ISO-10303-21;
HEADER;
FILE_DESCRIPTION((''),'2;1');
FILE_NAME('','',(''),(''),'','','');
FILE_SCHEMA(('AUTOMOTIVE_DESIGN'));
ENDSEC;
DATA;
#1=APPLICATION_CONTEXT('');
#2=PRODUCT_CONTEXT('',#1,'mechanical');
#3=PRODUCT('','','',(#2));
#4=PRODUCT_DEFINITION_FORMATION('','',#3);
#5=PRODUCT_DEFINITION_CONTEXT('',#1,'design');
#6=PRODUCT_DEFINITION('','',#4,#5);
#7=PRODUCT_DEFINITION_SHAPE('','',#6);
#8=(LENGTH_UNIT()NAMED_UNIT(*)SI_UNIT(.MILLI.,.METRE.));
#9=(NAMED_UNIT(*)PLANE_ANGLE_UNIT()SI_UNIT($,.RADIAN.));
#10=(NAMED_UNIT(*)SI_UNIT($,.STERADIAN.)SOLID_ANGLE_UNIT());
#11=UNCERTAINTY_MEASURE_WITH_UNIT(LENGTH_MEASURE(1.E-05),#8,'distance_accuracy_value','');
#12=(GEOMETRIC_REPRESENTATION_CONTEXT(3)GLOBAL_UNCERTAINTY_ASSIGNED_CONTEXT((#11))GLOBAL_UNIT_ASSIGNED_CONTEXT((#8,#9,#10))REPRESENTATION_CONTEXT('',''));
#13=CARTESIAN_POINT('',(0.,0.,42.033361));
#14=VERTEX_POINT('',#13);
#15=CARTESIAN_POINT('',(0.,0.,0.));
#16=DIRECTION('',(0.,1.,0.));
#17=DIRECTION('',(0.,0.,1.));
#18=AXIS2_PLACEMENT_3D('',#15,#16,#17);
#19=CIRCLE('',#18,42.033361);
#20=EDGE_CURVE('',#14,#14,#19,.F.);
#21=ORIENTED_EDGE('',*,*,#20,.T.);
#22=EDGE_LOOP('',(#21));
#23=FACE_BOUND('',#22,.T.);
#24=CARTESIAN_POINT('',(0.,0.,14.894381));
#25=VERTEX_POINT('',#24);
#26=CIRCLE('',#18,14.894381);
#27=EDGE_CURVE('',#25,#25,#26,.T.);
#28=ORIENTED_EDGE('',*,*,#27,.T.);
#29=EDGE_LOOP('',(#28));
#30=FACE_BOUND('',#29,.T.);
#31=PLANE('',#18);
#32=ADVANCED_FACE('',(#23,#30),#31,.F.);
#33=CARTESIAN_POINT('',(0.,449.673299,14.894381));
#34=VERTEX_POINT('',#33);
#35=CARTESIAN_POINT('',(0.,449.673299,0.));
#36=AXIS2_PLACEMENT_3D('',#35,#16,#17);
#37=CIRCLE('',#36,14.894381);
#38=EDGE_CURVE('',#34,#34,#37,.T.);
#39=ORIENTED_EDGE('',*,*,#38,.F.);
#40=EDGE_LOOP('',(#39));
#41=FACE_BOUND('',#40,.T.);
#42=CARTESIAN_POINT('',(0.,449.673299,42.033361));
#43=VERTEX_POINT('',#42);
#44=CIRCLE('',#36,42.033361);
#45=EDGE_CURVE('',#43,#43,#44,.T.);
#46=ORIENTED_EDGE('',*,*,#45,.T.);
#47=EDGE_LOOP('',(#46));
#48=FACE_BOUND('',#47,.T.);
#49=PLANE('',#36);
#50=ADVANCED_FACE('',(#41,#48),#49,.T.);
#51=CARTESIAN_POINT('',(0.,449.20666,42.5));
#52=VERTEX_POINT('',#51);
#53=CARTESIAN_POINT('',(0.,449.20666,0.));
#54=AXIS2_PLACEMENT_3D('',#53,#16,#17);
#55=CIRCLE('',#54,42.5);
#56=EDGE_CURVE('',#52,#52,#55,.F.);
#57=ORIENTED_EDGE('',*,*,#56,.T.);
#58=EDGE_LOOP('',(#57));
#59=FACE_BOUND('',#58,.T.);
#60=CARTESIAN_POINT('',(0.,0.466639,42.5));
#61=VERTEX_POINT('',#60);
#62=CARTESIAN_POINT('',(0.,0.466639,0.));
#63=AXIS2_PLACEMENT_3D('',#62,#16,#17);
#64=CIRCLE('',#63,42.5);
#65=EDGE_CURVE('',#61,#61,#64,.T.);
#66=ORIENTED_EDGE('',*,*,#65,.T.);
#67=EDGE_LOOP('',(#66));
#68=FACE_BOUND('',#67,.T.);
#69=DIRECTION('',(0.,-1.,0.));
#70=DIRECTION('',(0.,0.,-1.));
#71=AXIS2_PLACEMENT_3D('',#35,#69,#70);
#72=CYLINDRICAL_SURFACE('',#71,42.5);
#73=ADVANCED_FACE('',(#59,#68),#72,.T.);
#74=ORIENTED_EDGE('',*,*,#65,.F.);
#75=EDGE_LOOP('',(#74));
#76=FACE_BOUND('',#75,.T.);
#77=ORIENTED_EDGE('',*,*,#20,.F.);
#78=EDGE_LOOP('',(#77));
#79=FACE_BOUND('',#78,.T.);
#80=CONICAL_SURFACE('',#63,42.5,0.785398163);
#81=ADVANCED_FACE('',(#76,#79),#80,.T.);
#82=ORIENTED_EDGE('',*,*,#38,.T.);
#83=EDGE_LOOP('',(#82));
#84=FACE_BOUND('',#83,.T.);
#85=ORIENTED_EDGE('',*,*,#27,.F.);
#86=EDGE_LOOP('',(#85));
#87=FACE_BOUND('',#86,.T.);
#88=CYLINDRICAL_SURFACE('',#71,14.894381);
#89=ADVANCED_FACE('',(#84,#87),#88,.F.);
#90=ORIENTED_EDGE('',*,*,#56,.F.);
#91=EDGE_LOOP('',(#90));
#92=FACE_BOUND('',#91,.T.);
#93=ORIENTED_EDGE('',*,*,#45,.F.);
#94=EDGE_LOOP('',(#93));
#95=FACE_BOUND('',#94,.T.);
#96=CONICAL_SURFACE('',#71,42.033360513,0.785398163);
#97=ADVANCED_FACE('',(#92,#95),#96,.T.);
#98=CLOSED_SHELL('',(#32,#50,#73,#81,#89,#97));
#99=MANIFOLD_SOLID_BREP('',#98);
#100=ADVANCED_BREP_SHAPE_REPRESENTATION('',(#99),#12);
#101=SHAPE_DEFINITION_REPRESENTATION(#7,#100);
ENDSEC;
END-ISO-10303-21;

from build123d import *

# Parameters (mm, degrees)
SKETCH1_R           = 42.5
BOSS_EXTRUDE1_DEPTH = 449.67329934
SKETCH2_R           = 14.894380749
CUT_EXTRUDE1_DEPTH  = 454.67232243
CHAMFER1_SIZE       = 0.466639487


with BuildPart() as part:
    # Sketch1 → Boss-Extrude1 (new body)
    with BuildSketch(Plane(origin=(0, 0, 0), x_dir=(1, 0, 0), z_dir=(0, 1, 0))):
        Circle(SKETCH1_R)
    extrude(amount=BOSS_EXTRUDE1_DEPTH)

    # Sketch2 → Cut-Extrude1 (cut, through all)
    with BuildSketch(Plane(origin=(0, 0, 0), x_dir=(1, 0, 0), z_dir=(0, 1, 0))):
        Circle(SKETCH2_R)
    extrude(amount=CUT_EXTRUDE1_DEPTH, mode=Mode.SUBTRACT)

    # Chamfer1
    chamfer1_edges = [part.edges().sort_by_distance(p)[0] for p in [
        (-42.5, 449.67329934, 0),
        (-42.5, 0, 0),
    ]]
    chamfer(chamfer1_edges, length=CHAMFER1_SIZE)


solid = part.part
